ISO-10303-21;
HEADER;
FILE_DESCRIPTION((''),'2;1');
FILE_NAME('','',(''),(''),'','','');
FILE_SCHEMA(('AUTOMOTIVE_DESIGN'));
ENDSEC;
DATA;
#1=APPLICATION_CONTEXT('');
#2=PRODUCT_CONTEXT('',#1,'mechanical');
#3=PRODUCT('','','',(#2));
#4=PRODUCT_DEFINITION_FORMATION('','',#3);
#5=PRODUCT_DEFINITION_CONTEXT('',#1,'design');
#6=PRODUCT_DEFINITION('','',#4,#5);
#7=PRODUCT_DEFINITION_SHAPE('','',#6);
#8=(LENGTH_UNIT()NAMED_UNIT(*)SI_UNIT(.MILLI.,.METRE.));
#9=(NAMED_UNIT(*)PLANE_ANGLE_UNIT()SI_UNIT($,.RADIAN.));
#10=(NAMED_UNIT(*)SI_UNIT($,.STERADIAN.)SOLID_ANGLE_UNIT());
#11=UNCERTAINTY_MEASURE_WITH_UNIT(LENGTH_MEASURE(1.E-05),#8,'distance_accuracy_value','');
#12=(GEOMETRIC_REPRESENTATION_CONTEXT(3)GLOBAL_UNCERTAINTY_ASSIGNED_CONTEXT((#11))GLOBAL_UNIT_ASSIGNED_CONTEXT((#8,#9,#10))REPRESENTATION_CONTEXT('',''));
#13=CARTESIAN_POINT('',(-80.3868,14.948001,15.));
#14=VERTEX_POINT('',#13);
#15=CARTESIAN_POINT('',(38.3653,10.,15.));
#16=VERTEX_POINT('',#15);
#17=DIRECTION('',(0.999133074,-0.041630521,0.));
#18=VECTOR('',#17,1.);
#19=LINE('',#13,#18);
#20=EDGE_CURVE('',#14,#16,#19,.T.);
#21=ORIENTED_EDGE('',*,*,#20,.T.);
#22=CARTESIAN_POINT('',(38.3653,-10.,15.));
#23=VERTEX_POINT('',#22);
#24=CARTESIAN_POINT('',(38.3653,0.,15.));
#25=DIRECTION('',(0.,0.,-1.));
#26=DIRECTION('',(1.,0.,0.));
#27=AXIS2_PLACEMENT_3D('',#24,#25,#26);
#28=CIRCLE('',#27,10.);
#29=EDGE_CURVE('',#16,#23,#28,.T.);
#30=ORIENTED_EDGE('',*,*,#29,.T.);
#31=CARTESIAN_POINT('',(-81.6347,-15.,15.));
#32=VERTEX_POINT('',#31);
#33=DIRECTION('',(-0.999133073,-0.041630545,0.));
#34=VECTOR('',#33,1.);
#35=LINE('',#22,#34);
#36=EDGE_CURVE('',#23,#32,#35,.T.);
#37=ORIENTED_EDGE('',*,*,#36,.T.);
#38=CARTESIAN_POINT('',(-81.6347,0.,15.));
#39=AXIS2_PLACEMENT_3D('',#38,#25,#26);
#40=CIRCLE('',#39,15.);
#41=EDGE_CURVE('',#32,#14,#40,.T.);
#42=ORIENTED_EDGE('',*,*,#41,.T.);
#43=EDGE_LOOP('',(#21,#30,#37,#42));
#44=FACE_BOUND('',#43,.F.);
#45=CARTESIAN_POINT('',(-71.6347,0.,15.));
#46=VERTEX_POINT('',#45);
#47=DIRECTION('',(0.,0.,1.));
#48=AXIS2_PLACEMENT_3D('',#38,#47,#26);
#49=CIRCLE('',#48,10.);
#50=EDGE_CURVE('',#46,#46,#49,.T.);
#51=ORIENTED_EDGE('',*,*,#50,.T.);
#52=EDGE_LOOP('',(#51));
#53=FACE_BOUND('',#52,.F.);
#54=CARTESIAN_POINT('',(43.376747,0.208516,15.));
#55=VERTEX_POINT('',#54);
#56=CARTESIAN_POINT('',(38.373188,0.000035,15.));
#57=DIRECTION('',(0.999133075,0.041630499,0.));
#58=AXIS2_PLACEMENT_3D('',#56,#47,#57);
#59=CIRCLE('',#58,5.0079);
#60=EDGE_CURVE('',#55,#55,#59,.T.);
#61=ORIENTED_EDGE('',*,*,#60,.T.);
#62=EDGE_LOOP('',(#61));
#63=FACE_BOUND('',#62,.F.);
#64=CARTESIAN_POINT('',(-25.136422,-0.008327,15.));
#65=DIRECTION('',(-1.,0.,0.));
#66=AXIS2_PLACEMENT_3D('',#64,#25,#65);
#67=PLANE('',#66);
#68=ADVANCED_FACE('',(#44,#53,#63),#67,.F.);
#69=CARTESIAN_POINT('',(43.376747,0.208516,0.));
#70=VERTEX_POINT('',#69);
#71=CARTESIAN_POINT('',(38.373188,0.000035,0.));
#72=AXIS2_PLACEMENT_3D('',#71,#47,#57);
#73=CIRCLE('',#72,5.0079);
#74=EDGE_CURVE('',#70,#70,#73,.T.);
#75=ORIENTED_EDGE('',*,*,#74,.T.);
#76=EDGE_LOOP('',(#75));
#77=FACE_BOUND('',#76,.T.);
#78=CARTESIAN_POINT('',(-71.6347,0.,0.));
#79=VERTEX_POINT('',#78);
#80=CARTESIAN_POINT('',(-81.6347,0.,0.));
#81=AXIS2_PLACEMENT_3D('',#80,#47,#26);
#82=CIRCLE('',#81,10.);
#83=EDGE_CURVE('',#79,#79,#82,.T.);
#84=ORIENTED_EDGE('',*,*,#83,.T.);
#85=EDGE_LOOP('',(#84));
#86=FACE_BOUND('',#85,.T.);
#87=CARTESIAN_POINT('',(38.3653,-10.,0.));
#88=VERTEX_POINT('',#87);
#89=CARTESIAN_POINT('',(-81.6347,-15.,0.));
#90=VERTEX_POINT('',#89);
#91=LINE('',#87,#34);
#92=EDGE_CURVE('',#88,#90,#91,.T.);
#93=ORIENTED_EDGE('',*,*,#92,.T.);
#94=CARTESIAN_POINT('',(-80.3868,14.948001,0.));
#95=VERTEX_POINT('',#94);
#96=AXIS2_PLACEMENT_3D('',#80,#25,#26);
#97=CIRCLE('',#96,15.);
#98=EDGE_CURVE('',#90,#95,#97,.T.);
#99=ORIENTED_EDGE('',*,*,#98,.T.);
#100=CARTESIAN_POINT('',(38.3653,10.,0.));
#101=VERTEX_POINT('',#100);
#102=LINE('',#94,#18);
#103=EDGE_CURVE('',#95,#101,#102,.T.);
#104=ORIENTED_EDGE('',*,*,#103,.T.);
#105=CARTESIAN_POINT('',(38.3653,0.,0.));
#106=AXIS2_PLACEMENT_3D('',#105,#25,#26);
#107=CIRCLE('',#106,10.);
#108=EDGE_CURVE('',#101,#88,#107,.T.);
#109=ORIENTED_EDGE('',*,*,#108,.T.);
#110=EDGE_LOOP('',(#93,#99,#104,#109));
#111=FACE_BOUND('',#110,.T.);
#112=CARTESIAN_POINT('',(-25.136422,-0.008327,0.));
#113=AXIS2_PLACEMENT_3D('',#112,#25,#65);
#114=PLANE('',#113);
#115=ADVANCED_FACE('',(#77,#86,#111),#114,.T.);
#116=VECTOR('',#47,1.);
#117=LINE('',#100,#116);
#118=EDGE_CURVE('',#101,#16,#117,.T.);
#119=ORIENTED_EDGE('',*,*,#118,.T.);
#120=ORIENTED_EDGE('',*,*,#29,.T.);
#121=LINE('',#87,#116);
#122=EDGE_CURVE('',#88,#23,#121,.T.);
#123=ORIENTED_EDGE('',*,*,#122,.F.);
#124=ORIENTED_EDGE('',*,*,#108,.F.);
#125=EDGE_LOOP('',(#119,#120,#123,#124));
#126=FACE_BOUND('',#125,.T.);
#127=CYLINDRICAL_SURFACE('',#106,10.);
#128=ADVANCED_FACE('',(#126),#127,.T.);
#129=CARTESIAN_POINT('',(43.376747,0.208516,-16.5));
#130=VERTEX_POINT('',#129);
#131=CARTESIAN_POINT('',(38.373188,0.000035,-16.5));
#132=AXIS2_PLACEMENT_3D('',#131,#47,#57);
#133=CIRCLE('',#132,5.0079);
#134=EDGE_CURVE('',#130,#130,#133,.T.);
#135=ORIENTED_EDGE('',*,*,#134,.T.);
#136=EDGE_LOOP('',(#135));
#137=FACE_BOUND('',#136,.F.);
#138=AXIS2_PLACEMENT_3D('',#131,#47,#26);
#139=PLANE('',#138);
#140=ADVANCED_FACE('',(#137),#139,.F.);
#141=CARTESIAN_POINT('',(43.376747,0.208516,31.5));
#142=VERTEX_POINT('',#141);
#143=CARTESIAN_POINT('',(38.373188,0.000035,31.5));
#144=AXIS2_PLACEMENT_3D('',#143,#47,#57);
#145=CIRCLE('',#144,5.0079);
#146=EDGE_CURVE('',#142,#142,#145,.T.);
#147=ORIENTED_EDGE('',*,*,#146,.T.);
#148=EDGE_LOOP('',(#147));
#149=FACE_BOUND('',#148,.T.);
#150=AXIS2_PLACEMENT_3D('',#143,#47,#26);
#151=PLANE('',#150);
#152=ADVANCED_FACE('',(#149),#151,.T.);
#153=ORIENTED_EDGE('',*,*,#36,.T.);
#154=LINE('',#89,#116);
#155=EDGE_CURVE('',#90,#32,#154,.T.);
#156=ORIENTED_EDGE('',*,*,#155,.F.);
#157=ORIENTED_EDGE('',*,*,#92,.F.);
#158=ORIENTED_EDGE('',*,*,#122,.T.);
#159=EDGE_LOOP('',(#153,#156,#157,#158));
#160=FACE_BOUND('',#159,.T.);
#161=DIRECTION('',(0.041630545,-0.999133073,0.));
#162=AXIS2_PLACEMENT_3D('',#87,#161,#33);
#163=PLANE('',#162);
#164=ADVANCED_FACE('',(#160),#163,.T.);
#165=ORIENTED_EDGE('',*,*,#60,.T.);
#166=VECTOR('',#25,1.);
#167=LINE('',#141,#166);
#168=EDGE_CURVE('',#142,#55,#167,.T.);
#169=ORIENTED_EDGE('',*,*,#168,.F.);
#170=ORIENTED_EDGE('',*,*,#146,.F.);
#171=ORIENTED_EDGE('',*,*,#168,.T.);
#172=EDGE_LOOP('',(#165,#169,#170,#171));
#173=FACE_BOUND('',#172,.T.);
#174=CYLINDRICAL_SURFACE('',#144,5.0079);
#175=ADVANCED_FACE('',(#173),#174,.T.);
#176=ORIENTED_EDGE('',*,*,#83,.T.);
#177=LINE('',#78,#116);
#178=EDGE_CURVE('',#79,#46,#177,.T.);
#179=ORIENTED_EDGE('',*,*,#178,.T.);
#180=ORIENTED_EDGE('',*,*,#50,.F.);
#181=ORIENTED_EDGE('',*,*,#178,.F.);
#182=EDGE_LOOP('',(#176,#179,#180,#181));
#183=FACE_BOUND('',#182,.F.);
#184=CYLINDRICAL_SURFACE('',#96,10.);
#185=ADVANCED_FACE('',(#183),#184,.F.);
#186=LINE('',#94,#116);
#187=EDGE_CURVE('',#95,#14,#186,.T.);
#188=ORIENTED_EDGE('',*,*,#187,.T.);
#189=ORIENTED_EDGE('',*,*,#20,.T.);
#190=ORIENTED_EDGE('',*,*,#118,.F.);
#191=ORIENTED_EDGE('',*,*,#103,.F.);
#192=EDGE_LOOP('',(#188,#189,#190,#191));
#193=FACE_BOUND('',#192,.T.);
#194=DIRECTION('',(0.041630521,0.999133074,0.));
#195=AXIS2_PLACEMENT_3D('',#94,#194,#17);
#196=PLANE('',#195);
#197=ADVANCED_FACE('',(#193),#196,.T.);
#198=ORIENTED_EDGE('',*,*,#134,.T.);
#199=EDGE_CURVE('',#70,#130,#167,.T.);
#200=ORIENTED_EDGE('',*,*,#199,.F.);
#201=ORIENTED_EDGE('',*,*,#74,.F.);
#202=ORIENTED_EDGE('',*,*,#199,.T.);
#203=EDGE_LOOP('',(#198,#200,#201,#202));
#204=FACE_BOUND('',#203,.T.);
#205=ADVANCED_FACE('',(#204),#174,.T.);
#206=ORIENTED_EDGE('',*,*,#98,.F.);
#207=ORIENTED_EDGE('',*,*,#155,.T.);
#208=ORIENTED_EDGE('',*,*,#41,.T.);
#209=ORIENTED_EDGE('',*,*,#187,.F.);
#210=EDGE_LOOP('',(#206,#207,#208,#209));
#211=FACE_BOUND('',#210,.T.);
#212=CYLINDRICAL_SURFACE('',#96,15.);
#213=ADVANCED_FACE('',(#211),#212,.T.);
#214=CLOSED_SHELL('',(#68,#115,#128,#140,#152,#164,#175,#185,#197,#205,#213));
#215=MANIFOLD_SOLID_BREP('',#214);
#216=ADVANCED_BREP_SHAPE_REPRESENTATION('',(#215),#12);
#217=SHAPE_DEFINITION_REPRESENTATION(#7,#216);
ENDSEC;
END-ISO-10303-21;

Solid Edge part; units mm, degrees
sketch "Sketch1" plane through (0, 0, 0) normal (0, 0, 1) x (1, 0, 0)
  arc A0 (-81.6347, -15) -> (-80.3868, 14.948) centre (-81.6347, 0) cw
  line L0 (-80.3868, 14.948) -> (38.3653, 10)
  arc A1 (38.3653, 10) -> (38.3653, -10) centre (38.3653, 0) cw
  line L1 (38.3653, -10) -> (-81.6347, -15)
  circle A2 centre (38.3653, 0) radius 5
  circle A3 centre (-81.6347, 0) radius 10
extrude "Protrusion1" add sketch "Sketch1" along normal blind 15
sketch "Sketch2" plane through (-24.1347, 0, 31.5) normal (0, 0, 1) x (0.9991331, 0.0416305, 0)
  circle A0 centre (62.4537, -2.6022) radius 5.0079
extrude "ExtrudedProtrusion_3" add sketch "Sketch2" against normal blind 48
